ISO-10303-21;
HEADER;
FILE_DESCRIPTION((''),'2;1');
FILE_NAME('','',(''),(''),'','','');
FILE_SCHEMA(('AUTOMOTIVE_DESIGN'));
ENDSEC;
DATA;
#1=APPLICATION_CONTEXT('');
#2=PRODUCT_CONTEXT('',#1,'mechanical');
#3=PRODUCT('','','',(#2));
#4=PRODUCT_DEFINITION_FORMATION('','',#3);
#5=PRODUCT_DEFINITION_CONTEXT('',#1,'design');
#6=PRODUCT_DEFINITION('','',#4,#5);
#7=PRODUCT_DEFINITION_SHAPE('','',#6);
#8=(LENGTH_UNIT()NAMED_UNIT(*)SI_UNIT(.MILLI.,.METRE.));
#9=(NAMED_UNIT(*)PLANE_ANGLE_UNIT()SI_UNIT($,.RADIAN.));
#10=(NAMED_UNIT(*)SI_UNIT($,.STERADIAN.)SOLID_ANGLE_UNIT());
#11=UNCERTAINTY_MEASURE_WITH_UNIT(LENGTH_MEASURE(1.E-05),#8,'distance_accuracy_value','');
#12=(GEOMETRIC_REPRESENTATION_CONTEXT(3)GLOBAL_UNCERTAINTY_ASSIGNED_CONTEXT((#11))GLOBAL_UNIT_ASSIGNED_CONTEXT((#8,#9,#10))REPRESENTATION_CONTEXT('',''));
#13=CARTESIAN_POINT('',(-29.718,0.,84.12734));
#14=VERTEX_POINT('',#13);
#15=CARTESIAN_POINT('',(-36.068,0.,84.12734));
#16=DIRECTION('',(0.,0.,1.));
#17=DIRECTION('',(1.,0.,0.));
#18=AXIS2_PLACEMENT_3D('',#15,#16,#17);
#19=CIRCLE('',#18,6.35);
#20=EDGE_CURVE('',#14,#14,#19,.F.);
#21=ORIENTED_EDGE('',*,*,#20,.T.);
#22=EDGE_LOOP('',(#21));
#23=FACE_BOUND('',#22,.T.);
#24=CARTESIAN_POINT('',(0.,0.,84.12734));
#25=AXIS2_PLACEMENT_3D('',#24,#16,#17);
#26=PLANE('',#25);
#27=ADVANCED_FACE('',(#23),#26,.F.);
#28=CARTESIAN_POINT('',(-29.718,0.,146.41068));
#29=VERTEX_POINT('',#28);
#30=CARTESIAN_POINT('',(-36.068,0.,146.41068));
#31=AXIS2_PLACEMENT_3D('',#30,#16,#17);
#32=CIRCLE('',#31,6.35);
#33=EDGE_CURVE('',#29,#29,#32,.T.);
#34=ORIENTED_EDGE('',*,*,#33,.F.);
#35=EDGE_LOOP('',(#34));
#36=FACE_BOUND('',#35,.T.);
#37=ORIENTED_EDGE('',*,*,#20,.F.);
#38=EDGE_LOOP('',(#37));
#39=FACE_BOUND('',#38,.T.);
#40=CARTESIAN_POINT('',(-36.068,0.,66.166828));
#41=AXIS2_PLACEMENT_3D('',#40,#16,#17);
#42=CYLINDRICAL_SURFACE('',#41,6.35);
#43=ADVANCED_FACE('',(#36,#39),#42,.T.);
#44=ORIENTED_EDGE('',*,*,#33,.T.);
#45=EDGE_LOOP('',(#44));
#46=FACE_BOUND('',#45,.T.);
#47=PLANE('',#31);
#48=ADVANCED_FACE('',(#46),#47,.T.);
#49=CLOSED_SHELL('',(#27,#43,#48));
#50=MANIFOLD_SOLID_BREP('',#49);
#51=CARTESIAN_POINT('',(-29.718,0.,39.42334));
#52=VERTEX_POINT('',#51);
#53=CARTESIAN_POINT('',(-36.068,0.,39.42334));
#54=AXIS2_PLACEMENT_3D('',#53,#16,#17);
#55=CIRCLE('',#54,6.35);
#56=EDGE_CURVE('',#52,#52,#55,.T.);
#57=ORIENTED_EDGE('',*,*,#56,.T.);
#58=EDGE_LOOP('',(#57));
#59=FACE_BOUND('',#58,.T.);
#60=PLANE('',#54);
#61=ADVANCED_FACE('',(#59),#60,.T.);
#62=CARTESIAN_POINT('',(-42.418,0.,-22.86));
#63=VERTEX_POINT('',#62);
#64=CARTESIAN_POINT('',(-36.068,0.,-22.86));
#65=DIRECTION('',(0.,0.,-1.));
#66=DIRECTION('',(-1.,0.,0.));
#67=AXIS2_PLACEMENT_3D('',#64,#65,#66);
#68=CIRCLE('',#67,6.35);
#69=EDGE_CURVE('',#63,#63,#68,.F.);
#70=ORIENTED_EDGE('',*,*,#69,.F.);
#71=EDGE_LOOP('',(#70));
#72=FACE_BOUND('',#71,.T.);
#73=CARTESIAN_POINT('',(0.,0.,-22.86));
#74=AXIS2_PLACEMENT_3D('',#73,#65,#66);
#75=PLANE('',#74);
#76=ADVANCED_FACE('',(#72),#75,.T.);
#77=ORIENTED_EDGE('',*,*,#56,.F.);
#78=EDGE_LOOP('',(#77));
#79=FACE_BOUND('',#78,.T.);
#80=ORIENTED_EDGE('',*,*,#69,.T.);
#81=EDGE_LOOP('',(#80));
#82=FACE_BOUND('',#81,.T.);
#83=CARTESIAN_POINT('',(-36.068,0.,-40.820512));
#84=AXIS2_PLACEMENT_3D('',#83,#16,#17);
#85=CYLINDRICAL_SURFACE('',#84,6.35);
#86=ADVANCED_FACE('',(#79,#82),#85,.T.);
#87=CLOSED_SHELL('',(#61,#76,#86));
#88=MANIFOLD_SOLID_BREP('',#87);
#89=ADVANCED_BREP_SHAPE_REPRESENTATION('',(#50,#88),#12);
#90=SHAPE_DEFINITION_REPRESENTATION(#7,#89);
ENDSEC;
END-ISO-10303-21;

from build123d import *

# Parameters (mm, degrees)
BOSS_EXTRUDE1_START     = -62.28334
BOSS_EXTRUDE1_OUTLINE_R = 6.35
BOSS_EXTRUDE1_DEPTH     = 62.28334
SKETCH3_R               = 6.35
BOSS_EXTRUDE2_DEPTH     = 62.28334


# Read off the part's stored shape, not the designer's step: Boss-Extrude1
with BuildPart() as part:
    # Boss-Extrude1 outline → Boss-Extrude1 (new body)
    with BuildSketch(Plane.XY.offset(146.41068).offset(BOSS_EXTRUDE1_START)):
        with Locations((-36.068, 0)):
            Circle(BOSS_EXTRUDE1_OUTLINE_R)
    extrude(amount=BOSS_EXTRUDE1_DEPTH)


with BuildPart() as body_2:
    # Sketch3 → Boss-Extrude2 (new body)
    with BuildSketch(Plane.XY.offset(39.42334)):
        with Locations((-36.068, 0)):
            Circle(SKETCH3_R)
    extrude(amount=-BOSS_EXTRUDE2_DEPTH)


solid = Compound([part.part, body_2.part])
